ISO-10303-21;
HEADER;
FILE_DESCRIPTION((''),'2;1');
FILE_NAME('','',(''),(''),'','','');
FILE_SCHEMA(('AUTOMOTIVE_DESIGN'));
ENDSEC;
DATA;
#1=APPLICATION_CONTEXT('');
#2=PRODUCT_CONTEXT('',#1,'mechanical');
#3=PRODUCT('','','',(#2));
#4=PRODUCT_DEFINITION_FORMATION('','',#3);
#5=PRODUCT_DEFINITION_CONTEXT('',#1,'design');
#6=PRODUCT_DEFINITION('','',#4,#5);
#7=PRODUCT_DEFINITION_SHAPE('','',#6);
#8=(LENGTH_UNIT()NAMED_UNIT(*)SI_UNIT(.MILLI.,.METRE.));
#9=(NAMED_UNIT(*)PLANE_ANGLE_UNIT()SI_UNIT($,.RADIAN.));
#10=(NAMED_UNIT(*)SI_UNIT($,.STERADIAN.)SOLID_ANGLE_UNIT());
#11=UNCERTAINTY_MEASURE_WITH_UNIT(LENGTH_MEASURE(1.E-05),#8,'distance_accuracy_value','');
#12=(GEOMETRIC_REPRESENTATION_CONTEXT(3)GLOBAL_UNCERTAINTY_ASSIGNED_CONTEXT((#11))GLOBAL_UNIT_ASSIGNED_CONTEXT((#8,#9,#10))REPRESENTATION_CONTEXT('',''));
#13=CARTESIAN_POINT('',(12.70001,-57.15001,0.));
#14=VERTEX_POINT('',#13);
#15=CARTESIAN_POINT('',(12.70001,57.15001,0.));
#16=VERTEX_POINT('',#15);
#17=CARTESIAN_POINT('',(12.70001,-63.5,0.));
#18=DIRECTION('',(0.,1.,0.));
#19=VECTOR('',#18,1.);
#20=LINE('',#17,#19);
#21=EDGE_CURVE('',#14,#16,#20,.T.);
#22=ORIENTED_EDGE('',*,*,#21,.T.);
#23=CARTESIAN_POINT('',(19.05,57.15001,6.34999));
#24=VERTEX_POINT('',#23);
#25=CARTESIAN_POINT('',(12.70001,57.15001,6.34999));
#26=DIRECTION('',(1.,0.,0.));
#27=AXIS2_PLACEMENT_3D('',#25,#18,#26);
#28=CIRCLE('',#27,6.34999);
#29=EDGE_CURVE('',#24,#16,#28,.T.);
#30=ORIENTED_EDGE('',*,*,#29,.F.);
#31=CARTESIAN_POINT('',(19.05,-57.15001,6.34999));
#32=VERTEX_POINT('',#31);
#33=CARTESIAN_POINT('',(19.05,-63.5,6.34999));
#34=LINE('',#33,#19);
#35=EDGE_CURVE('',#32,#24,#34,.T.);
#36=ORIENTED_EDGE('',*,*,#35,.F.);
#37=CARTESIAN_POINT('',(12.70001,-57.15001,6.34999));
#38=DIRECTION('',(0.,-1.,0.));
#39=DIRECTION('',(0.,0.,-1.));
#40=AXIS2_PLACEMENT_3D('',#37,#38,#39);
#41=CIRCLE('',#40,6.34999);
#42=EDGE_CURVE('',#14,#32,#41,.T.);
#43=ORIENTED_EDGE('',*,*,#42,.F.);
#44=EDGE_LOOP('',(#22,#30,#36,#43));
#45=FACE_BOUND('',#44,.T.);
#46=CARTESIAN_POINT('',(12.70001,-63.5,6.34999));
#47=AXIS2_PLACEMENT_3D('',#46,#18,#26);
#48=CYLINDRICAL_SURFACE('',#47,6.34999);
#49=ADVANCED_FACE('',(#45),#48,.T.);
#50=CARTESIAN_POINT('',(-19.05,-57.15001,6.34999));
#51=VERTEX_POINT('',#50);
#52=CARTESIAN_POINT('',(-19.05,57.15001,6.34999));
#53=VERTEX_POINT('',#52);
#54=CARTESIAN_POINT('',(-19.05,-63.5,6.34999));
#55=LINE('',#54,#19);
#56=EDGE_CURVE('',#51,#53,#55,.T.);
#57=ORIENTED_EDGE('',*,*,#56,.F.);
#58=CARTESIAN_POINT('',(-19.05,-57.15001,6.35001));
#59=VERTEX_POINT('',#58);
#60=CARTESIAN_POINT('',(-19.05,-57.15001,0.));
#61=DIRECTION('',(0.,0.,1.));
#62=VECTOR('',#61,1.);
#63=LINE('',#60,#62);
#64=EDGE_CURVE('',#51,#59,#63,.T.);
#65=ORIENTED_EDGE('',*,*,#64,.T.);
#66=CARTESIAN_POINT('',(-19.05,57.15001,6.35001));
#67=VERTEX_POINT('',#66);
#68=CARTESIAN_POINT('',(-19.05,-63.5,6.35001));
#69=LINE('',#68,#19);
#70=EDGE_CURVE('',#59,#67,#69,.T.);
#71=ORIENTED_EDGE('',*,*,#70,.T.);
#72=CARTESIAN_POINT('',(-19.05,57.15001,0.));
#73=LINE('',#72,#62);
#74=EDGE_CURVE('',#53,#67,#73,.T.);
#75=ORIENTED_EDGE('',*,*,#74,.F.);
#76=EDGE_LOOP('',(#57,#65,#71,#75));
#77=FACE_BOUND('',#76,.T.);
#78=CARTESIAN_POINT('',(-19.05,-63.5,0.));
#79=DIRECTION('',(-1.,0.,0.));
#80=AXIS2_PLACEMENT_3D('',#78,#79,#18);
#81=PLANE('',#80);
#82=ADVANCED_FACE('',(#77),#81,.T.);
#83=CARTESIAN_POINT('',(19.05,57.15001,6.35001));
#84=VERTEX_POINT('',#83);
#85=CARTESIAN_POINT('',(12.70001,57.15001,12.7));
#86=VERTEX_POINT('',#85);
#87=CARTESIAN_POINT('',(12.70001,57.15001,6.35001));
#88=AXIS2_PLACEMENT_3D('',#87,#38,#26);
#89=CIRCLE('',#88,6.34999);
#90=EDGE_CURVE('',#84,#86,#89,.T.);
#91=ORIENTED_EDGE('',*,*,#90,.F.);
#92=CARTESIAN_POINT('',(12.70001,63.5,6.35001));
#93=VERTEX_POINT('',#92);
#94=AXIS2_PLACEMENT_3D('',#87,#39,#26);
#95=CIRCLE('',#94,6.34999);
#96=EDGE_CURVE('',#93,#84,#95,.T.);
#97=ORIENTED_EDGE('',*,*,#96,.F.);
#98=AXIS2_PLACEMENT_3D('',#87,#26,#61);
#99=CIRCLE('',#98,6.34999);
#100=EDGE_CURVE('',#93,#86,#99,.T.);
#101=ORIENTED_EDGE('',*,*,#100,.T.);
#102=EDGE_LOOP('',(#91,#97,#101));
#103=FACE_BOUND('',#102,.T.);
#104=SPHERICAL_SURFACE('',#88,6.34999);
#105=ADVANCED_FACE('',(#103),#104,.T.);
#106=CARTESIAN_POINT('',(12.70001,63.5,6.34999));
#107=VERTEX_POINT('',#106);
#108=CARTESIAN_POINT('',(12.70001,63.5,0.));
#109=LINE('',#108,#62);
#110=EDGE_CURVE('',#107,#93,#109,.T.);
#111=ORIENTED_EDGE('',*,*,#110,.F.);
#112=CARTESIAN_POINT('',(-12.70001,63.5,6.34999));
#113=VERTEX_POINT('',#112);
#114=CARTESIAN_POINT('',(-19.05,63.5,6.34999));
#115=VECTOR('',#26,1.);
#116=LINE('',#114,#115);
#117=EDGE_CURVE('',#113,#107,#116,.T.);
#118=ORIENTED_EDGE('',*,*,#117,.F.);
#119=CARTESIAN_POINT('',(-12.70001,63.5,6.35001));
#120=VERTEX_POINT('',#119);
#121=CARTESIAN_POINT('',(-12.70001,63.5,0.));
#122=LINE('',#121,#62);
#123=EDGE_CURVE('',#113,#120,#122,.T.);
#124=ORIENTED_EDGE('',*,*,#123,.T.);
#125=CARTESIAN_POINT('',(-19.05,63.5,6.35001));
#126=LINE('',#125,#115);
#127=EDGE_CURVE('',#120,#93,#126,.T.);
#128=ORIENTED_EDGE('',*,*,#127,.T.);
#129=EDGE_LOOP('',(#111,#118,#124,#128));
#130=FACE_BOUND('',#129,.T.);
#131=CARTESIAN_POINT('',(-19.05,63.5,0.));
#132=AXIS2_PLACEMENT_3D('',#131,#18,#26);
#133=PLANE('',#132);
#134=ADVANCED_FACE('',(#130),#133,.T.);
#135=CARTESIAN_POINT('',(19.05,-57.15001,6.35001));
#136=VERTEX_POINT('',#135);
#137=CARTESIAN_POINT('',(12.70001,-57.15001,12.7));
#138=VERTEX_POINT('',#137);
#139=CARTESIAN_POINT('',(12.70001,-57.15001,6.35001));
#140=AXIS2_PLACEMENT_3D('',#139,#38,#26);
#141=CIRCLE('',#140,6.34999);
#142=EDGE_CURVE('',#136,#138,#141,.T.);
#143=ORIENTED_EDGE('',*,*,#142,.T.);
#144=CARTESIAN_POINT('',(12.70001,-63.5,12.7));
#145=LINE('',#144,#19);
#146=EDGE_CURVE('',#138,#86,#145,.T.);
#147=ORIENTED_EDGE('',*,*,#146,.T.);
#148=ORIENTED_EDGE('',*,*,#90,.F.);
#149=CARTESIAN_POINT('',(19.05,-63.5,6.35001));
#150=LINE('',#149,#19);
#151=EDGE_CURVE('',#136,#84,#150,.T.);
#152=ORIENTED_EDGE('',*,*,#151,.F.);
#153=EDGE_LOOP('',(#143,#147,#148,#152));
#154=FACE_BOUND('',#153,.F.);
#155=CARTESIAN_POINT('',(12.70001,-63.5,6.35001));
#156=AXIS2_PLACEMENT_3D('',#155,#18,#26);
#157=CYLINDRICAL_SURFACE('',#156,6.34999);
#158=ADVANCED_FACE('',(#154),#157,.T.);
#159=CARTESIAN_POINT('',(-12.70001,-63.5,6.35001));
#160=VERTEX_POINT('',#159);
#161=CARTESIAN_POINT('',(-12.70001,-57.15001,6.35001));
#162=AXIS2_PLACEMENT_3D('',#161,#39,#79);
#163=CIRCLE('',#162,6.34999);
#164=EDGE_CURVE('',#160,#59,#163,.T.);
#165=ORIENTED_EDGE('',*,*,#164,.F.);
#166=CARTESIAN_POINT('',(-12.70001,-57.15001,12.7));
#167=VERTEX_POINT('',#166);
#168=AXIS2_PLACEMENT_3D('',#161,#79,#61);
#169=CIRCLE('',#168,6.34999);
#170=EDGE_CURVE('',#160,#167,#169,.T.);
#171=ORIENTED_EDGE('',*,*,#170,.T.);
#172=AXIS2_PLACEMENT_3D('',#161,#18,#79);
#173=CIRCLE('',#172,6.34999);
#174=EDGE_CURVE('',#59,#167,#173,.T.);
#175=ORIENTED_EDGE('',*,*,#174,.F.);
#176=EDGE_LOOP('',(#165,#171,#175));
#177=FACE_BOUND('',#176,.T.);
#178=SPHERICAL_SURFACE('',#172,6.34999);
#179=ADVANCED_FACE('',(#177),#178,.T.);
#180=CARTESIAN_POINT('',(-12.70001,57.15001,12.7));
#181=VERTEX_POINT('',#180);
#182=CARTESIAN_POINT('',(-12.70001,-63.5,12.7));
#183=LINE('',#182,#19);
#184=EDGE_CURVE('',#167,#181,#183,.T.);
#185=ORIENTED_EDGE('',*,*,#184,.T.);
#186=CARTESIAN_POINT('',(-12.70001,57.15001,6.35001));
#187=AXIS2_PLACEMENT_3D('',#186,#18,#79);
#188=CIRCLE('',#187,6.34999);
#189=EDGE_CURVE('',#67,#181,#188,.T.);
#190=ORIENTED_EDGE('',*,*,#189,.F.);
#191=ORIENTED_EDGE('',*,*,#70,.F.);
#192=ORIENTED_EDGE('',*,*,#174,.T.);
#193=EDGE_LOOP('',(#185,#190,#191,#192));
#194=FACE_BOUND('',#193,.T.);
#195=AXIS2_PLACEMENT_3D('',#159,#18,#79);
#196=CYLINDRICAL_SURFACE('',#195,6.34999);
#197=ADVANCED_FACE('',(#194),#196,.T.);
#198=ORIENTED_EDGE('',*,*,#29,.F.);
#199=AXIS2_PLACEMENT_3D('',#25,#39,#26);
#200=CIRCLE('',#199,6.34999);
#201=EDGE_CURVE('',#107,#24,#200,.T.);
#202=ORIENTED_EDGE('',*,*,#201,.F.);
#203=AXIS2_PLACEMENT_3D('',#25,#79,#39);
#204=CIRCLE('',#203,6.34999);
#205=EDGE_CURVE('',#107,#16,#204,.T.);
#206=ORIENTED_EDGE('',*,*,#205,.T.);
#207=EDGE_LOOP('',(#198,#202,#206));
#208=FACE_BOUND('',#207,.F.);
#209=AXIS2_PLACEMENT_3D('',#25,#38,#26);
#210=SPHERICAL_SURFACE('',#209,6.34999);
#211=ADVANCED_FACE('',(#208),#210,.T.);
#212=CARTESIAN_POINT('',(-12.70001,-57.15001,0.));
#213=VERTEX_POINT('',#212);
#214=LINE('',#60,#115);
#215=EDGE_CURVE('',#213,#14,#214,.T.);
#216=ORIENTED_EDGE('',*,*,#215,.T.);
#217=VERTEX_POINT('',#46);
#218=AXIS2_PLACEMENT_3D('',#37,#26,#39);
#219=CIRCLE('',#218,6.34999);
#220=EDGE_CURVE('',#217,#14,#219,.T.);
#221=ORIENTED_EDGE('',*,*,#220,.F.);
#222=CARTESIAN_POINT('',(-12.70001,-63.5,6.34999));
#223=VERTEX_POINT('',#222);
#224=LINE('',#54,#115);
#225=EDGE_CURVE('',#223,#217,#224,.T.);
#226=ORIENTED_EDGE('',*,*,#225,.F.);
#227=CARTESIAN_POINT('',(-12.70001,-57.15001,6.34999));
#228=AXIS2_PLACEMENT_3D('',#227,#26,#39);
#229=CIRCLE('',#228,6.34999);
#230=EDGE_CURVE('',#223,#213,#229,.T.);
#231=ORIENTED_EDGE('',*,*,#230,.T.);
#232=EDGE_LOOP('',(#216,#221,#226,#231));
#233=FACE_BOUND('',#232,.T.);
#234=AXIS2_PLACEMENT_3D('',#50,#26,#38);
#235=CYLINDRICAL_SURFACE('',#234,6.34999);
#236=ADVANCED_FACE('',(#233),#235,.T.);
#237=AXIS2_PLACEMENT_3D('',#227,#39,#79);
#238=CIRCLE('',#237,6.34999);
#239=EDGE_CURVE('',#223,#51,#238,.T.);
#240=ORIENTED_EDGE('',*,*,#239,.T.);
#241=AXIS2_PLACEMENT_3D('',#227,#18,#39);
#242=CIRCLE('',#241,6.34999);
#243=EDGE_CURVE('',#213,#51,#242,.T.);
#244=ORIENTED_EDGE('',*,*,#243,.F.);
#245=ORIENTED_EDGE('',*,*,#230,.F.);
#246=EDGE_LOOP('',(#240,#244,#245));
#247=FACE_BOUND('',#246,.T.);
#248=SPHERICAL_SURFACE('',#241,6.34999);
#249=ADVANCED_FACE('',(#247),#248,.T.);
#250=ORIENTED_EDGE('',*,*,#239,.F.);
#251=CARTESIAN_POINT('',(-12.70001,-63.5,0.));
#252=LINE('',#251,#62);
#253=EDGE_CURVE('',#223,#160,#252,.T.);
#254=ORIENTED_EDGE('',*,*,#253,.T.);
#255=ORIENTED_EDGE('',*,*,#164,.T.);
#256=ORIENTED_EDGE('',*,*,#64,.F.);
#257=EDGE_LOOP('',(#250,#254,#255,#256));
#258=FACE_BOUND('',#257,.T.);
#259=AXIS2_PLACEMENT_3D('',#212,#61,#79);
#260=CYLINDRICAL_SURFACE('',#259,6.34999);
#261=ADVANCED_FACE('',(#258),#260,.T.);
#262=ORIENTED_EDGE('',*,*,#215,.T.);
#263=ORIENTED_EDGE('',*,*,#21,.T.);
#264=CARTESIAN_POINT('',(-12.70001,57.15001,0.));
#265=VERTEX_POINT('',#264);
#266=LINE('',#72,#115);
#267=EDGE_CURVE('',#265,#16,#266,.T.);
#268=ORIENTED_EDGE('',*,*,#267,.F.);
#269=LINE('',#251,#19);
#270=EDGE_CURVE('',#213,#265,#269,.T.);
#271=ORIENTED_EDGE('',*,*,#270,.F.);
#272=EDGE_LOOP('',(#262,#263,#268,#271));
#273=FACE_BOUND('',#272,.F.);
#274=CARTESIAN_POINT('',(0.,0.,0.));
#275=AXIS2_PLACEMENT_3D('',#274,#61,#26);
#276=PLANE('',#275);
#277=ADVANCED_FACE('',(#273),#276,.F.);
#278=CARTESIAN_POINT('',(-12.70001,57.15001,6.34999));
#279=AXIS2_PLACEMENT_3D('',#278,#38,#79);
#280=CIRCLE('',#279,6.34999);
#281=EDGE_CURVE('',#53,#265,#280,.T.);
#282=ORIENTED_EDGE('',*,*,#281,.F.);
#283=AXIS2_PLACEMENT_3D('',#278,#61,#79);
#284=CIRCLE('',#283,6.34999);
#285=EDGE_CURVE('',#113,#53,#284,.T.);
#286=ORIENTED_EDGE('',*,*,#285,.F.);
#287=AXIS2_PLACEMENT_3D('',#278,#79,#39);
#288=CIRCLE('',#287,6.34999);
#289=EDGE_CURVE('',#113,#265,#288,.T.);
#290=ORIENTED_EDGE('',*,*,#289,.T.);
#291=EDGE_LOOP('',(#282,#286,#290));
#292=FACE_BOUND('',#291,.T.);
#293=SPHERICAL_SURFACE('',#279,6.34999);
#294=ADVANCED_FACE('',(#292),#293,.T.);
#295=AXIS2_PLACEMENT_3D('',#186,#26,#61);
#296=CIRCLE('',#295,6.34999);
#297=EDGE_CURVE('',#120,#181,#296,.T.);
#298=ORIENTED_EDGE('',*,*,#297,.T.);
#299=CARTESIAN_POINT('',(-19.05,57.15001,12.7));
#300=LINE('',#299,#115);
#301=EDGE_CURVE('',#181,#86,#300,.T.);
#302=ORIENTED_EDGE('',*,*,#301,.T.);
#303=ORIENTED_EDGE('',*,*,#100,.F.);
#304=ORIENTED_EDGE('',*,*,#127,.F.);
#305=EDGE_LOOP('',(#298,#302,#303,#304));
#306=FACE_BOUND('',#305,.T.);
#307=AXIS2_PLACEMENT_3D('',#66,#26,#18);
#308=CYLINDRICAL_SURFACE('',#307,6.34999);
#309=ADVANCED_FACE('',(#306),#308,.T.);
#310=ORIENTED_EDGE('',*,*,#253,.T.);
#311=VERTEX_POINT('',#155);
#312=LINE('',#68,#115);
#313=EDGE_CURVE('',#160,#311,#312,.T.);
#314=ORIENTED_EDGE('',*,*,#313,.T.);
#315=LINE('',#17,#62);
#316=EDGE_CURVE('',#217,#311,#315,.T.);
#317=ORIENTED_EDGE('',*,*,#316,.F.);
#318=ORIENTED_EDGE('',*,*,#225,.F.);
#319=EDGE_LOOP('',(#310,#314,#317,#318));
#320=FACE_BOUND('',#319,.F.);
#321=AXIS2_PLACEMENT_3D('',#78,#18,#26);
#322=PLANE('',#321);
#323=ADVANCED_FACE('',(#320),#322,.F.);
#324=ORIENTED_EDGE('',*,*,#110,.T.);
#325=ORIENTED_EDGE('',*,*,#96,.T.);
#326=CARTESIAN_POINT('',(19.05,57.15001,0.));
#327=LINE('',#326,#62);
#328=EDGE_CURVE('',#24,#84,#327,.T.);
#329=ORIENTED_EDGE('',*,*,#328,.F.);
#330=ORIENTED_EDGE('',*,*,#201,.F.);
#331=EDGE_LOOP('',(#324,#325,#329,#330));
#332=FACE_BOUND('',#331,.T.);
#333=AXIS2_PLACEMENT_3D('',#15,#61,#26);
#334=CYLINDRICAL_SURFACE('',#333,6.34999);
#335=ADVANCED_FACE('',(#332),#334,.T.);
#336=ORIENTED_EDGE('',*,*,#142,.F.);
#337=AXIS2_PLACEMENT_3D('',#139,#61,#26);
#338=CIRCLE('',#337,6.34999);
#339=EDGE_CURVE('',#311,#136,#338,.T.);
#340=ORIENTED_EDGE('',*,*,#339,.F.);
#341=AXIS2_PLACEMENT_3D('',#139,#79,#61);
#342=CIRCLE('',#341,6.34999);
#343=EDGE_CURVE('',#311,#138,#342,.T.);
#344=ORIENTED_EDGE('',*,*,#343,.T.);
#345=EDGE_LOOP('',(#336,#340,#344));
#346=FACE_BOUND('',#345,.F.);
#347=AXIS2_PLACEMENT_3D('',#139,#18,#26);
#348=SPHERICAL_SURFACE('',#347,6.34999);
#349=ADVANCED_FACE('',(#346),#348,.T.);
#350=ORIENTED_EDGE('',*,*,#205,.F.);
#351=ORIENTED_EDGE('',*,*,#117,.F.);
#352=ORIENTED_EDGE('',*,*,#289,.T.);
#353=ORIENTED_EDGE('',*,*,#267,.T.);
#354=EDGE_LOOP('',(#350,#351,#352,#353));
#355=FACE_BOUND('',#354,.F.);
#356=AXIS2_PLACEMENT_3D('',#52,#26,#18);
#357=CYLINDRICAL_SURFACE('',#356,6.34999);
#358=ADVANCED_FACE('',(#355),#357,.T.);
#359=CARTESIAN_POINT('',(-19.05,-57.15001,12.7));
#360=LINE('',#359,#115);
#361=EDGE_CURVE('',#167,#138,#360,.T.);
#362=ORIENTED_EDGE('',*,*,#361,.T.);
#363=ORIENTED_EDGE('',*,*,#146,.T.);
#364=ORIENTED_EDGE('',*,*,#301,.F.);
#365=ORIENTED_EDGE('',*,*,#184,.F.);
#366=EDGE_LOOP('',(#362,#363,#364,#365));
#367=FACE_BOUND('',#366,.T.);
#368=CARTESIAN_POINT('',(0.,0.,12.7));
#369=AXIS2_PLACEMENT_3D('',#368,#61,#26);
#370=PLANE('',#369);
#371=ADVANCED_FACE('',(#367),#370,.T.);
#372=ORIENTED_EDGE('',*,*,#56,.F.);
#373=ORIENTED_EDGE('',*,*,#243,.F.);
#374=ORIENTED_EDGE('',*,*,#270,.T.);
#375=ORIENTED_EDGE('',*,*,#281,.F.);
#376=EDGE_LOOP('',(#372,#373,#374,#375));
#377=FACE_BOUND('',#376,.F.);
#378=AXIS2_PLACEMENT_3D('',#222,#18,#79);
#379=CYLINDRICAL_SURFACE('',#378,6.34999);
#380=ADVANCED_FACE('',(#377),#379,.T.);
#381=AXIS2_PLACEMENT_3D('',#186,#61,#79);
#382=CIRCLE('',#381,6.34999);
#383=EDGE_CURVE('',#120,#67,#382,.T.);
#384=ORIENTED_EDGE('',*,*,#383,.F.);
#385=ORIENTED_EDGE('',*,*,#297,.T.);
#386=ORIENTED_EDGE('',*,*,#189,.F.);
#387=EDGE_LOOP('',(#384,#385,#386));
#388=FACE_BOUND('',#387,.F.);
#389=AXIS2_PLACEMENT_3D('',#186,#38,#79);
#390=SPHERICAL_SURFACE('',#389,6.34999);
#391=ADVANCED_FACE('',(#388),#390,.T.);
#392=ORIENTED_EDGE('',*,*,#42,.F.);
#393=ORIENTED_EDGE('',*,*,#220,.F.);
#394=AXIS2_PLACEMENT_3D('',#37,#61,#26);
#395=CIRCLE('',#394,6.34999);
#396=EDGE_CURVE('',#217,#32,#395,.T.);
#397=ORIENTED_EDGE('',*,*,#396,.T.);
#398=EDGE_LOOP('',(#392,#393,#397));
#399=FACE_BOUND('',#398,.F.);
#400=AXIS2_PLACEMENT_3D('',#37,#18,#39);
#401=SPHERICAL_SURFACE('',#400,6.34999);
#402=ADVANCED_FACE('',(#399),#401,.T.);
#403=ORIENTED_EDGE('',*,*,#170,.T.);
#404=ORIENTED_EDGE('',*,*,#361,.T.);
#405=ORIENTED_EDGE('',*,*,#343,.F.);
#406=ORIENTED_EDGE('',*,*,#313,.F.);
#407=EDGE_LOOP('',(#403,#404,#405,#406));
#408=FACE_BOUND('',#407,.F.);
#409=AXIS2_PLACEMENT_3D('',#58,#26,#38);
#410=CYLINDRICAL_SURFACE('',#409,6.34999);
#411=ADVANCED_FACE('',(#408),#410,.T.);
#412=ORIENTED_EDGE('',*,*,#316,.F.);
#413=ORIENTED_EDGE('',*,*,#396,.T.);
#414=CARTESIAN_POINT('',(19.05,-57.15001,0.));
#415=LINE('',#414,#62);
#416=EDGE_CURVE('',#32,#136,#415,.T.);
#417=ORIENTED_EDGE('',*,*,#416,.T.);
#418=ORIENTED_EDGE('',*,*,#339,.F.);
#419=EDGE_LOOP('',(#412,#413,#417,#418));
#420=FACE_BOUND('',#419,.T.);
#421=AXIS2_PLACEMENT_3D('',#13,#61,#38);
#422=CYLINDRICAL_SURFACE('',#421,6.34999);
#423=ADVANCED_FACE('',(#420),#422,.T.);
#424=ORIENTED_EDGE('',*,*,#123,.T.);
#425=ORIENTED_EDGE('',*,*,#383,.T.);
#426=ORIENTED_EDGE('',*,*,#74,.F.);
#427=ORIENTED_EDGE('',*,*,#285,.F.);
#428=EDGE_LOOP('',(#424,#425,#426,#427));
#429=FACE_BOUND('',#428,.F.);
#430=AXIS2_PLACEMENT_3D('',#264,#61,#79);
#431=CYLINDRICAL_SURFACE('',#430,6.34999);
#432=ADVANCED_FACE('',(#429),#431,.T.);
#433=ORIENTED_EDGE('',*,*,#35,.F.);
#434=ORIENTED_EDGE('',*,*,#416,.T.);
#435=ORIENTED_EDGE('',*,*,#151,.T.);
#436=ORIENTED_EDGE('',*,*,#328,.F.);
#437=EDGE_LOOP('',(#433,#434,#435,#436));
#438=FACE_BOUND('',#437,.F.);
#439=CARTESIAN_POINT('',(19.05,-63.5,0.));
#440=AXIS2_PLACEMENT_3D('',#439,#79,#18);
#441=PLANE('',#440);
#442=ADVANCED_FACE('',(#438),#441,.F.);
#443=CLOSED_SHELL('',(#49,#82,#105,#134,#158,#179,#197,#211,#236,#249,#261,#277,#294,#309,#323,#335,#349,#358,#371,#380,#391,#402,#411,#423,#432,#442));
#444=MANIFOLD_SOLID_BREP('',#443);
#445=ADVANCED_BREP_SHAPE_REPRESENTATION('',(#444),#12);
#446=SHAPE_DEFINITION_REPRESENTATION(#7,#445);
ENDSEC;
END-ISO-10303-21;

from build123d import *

# Parameters (mm, degrees)
F0_W     = 38.1
F0_H     = 127
F1_DEPTH = 12.7
F2_R     = 6.34999


# Not quite as in the source:
# - a fillet or chamfer is up to 0.001 mm smaller than in the source, because OpenCascade refuses the exact size


with BuildPart() as f1:
    # F0 (on Top) → F1 (new body)
    with BuildSketch(Plane.XY):
        Rectangle(F0_W, F0_H)
    extrude(amount=F1_DEPTH)

    # F2 (radius 6.35 in the source; OpenCascade refuses exactly that, so slightly less here)
    f2_edges = [f1.edges().sort_by_distance(p)[0] for p in [
        (-19.05, 0, 12.7),
        (-19.05, 0, 0),
        (19.05, 0, 0),
        (19.05, 0, 12.7),
        (0, -63.5, 0),
        (-19.05, -63.5, 6.35),
        (19.05, -63.5, 6.35),
        (0, -63.5, 12.7),
        (19.05, 63.5, 6.35),
        (-19.05, 63.5, 6.35),
        (0, 63.5, 0),
        (0, 63.5, 12.7),
    ]]
    fillet(f2_edges, radius=F2_R)


solid = f1.part
